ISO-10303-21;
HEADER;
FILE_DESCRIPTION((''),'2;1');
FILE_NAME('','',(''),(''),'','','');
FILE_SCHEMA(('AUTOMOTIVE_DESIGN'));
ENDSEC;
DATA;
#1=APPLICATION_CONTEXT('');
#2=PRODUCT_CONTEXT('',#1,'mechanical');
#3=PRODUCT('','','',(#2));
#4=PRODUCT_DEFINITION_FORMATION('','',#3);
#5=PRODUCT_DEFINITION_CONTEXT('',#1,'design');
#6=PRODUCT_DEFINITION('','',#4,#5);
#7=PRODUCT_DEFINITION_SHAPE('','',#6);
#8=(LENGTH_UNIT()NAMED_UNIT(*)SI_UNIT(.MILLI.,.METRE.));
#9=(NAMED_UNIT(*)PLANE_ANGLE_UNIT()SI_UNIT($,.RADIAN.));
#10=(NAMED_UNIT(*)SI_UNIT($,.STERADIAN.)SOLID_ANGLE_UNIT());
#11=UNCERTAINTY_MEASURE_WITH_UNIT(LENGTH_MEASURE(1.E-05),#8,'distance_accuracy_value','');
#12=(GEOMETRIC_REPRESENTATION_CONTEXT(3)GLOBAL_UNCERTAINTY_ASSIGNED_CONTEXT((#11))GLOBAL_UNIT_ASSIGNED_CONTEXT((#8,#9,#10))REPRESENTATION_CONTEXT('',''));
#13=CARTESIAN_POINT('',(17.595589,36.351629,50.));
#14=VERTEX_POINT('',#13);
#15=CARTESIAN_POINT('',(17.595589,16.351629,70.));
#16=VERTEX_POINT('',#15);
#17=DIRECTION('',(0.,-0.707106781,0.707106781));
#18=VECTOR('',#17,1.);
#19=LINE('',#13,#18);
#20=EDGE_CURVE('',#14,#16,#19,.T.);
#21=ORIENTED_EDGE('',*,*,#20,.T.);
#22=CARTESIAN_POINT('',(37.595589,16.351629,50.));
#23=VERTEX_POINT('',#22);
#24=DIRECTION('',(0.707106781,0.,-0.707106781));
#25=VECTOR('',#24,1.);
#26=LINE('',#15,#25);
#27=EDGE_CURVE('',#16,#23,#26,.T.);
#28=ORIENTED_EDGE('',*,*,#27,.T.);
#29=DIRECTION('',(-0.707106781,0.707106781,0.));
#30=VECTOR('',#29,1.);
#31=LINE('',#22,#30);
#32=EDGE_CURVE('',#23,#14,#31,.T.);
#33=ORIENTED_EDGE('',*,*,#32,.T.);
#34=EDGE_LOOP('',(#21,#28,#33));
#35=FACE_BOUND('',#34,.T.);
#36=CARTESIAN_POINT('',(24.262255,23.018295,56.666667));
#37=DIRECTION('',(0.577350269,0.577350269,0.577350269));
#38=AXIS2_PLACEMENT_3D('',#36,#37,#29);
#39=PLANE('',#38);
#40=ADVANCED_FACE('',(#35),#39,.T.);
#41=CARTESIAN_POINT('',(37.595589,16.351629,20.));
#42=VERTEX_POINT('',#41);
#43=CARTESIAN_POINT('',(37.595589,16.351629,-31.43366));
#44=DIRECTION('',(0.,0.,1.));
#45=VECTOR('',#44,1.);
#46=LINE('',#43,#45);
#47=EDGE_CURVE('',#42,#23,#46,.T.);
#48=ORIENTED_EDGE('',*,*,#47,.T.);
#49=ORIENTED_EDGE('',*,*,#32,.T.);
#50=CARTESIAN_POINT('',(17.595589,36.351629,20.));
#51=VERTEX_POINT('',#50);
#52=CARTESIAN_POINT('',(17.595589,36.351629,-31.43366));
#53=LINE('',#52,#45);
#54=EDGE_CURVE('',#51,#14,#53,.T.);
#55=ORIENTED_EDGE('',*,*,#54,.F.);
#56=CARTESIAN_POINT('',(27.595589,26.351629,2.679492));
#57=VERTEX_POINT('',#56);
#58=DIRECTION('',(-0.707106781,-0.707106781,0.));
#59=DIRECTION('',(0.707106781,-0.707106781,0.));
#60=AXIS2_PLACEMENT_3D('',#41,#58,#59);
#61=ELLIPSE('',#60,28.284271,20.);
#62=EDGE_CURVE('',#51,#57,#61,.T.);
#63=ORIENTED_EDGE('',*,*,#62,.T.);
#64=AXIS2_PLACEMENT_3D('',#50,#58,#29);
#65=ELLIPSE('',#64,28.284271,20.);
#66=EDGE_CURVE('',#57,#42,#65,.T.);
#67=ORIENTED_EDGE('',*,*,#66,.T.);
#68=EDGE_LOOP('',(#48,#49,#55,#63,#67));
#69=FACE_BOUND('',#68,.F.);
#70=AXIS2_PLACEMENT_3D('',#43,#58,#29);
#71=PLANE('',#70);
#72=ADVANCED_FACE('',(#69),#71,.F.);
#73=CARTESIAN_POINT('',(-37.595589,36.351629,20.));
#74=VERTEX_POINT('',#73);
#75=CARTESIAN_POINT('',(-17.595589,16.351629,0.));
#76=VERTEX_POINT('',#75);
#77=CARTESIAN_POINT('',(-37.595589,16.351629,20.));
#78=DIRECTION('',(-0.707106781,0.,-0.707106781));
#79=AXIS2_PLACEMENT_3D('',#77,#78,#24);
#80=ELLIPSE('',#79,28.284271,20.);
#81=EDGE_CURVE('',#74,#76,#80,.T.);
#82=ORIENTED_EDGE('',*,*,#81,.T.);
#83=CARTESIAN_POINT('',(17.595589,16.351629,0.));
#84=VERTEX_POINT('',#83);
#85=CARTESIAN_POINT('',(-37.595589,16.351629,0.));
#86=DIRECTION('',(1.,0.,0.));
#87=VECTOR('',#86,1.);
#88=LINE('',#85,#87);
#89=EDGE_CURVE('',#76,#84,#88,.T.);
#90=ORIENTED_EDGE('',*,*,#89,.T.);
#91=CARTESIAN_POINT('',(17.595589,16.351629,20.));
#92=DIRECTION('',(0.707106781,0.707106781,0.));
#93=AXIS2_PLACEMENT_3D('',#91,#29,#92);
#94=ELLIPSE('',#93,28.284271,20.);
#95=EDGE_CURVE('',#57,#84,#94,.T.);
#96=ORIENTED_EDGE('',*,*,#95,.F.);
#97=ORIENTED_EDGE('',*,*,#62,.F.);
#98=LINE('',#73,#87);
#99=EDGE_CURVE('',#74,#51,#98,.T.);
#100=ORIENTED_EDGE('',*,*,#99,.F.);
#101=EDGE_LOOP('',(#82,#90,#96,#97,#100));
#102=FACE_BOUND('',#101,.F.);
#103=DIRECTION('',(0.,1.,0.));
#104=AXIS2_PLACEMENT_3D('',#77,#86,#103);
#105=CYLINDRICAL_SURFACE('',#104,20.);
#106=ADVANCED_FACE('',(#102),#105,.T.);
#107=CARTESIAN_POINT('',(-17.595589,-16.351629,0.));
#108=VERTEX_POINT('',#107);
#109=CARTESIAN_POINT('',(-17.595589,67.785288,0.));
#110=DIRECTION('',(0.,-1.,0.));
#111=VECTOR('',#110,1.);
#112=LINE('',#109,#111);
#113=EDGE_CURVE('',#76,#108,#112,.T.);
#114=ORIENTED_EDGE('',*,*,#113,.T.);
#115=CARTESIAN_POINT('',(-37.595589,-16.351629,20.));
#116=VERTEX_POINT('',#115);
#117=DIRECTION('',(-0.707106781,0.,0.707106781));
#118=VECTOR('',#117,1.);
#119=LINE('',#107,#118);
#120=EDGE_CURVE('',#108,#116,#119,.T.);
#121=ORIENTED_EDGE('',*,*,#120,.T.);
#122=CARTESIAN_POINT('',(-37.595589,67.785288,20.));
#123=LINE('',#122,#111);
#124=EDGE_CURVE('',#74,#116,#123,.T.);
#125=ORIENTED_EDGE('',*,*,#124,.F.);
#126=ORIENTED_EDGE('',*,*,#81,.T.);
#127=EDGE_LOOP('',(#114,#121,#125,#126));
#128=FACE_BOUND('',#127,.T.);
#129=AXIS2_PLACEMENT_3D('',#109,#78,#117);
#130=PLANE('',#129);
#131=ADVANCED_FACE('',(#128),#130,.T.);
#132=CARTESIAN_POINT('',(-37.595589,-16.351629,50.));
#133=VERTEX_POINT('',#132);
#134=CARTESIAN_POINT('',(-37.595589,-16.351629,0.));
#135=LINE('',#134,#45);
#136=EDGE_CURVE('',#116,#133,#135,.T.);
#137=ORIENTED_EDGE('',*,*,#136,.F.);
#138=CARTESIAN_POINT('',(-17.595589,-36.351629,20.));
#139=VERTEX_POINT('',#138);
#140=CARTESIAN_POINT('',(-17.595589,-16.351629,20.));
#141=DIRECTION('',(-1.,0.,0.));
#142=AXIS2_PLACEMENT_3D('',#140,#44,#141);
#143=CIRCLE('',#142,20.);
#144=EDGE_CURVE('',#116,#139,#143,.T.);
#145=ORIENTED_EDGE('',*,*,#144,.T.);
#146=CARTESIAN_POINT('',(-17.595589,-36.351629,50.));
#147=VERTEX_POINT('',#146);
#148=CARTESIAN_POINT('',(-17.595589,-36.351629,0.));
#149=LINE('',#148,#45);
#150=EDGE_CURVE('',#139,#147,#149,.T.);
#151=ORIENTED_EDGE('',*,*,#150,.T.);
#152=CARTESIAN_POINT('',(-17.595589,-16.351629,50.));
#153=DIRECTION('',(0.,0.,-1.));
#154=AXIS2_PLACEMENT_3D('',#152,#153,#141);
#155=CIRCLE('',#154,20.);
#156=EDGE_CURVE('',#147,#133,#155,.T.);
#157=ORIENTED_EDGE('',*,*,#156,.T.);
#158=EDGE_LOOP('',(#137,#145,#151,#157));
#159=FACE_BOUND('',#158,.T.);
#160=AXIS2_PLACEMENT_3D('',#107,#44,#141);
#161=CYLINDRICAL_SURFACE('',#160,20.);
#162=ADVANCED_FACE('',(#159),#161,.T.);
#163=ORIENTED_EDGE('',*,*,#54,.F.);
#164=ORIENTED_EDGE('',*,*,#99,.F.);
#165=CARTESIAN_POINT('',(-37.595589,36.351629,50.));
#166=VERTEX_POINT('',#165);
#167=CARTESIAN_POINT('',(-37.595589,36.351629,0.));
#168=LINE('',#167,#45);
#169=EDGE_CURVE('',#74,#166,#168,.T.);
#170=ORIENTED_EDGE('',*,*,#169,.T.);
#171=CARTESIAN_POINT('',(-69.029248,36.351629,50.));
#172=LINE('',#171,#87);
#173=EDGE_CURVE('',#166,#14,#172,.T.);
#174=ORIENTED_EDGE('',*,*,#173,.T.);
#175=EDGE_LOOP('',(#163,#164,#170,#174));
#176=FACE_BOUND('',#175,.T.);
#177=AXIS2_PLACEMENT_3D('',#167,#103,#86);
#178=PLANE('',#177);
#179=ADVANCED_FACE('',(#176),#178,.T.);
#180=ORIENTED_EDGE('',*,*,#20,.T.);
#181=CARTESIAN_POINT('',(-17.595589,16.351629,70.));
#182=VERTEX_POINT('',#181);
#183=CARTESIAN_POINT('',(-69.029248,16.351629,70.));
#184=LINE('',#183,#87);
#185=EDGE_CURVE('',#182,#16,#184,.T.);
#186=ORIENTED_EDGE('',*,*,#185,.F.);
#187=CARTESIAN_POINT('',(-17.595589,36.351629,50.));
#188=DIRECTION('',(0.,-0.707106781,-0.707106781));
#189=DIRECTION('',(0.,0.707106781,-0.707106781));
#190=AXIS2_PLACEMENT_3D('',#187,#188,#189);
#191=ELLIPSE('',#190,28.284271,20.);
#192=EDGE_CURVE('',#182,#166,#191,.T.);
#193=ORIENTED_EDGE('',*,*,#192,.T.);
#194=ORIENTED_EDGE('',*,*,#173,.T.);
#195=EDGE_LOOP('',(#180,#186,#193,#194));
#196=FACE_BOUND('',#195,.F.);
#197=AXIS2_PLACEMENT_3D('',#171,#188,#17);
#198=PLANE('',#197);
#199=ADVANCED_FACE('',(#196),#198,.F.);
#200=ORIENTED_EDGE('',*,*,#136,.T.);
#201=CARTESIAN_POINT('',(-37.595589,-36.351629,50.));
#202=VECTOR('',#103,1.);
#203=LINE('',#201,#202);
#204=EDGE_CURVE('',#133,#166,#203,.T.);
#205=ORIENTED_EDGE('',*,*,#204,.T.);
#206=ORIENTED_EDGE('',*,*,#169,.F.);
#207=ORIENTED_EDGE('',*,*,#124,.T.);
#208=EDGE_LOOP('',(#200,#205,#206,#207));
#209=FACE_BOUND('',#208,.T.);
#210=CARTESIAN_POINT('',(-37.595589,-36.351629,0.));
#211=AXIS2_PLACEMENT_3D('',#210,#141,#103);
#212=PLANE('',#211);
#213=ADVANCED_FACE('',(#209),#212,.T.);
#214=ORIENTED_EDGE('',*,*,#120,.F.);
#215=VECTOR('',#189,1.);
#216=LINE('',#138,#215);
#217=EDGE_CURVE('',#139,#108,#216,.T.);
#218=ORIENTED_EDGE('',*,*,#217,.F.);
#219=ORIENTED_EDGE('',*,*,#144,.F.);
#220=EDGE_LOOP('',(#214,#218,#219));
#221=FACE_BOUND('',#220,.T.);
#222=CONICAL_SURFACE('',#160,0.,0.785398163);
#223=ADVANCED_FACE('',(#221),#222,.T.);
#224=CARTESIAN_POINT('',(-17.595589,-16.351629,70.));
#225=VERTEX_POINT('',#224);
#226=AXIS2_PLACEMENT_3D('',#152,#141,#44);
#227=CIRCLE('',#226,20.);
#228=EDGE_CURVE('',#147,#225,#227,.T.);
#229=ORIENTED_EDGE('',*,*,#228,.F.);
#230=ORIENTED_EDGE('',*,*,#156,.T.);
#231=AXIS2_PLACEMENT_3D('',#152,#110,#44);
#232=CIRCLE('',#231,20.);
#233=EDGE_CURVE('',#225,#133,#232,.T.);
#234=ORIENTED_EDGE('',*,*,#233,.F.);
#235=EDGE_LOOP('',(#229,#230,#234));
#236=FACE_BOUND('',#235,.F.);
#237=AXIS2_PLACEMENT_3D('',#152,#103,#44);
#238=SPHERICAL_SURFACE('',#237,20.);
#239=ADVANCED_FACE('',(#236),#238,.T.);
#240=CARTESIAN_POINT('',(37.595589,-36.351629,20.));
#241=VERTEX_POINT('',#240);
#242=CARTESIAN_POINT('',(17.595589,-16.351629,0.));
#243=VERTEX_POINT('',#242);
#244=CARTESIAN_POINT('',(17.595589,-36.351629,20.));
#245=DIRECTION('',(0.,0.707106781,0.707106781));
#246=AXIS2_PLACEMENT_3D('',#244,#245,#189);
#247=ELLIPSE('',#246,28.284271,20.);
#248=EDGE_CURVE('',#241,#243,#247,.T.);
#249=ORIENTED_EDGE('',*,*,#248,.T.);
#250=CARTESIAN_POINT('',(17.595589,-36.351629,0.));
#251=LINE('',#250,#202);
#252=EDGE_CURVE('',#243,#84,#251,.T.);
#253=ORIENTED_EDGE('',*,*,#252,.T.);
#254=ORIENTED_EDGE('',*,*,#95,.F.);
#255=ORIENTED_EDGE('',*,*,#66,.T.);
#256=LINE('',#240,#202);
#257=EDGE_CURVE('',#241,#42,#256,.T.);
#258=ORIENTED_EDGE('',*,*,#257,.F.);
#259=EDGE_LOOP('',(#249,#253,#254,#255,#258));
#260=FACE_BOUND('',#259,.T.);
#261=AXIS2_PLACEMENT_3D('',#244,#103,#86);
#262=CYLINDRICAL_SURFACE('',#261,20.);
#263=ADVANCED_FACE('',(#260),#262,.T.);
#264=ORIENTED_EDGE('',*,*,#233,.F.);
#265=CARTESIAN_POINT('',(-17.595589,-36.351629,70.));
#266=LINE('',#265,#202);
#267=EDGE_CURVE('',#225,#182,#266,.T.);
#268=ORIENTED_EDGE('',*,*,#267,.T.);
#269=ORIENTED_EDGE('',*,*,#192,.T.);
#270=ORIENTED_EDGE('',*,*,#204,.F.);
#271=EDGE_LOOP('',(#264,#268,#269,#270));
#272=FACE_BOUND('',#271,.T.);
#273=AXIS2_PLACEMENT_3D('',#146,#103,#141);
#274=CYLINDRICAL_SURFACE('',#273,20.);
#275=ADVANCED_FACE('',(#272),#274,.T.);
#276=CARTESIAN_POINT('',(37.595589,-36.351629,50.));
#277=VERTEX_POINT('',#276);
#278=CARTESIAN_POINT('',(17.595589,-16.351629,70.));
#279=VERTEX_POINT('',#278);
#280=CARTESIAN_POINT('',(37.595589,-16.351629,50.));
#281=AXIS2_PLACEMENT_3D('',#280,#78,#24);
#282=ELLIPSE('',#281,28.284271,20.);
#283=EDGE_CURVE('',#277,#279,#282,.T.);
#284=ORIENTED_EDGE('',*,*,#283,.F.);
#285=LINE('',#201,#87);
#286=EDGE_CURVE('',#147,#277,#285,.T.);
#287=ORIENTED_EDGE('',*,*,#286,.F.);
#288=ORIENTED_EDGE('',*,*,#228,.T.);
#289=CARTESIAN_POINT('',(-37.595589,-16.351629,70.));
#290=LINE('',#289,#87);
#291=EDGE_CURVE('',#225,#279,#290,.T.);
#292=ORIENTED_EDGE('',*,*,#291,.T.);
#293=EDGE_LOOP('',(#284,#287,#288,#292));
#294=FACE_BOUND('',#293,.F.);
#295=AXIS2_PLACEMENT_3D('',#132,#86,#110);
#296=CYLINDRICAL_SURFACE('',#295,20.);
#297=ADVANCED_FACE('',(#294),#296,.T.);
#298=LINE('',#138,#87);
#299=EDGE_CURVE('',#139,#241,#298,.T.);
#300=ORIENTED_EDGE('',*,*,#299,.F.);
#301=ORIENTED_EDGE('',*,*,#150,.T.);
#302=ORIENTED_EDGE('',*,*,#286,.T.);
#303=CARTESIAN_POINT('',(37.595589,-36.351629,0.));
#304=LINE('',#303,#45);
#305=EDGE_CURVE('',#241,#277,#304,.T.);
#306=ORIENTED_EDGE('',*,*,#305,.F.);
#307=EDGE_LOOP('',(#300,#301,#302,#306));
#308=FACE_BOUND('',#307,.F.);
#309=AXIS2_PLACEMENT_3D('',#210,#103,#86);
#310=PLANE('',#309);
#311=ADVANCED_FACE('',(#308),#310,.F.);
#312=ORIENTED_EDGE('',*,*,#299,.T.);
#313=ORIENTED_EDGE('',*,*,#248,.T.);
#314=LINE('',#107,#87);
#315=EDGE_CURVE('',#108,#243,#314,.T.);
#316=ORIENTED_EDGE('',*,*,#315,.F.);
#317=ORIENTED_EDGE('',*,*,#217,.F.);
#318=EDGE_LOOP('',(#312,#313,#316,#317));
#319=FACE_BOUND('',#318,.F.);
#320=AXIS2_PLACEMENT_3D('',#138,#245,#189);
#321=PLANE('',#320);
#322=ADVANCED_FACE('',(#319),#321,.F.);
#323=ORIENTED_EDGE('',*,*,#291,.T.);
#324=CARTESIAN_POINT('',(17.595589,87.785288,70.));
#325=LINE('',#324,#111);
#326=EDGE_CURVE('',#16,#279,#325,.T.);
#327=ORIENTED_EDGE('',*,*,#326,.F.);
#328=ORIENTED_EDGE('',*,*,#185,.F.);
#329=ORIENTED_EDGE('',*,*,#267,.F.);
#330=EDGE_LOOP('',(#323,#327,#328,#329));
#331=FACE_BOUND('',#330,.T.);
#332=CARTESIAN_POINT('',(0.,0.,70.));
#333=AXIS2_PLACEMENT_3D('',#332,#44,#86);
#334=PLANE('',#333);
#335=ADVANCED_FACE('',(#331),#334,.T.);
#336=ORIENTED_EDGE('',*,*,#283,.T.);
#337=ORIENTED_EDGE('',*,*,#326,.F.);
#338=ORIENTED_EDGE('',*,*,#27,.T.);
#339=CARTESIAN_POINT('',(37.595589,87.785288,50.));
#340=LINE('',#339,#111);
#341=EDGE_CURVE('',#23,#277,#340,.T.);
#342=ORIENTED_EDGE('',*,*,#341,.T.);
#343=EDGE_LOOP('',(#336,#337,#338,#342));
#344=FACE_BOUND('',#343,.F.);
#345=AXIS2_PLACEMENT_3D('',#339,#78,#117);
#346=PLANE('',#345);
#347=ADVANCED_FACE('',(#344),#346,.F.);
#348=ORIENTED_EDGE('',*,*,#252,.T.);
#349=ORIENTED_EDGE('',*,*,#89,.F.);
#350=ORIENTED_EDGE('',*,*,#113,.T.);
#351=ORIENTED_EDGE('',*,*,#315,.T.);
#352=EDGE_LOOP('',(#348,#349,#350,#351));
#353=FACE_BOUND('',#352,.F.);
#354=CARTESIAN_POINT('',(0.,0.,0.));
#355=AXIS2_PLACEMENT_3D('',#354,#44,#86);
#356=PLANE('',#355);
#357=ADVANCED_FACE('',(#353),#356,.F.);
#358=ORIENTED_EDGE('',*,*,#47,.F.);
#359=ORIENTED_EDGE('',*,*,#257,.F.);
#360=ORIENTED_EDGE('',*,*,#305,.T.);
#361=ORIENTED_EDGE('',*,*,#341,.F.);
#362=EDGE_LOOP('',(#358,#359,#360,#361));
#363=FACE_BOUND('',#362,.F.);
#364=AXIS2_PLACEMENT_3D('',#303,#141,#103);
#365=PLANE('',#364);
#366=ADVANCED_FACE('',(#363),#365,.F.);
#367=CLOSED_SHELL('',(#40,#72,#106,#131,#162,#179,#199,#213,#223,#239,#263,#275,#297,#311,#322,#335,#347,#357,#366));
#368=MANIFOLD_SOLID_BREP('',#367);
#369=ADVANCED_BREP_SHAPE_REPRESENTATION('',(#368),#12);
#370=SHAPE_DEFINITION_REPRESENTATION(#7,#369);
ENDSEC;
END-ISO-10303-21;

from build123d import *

# Parameters (mm, degrees)
F0_W         = 75.1911774278
F0_H         = 72.7032572031
F1_DEPTH     = 70
F2_R         = 20
F3_T1_DEPTH  = 25.4034118443
F3_T3_DEPTH  = 155.5705767217
F3_T5_DEPTH  = 158.0584969464
F3_T7_DEPTH  = 152.8673195186
F3_T9_DEPTH  = 86.6248371871
F3_T11_DEPTH = 84.1369169624
F3_T14_ANGLE = 90


# Not quite as in the source:
# - a fillet or chamfer that OpenCascade refuses, or shapes differently, is made with other operations: its cross-section is extruded or revolved along the edge and cut away or added


with BuildPart() as f1:
    # F0 (on Top) → F1 (new body)
    with BuildSketch(Plane.XY):
        Rectangle(F0_W, F0_H)
    extrude(amount=F1_DEPTH)

    # F2
    f2_edges = [f1.edges().sort_by_distance(p)[0] for p in [
        (-37.595589, 0, 70),
        (0, -36.351629, 70),
        (-37.595589, -36.351629, 35),
        (0, 36.351629, 0),
        (37.595589, 0, 0),
    ]]
    fillet(f2_edges, radius=F2_R)

    # F3: chamfer of 20 on 6 edges, made by hand

    # F3_s2 → F3_t1 (cut)
    with BuildSketch(Plane(origin=(34.6490724385, 34.6490724385, 34.6490724385), x_dir=(-0.7071067812, 0.7071067812, 0), z_dir=(0.5773502692, 0.5773502692, 0.5773502692))):
        Polygon((-15.0217482547, 18.8009698021), (13.2625229928, 18.8009698021), (-0.879612631, 43.2958672299), align=None)
    extrude(amount=F3_T1_DEPTH, mode=Mode.SUBTRACT)

    # F3_s4 → F3_t3 (cut)
    with BuildSketch(Plane.XZ.offset(-87.7852883609)):
        Polygon((37.5955887139, 50), (17.5955887139, 70), (37.5955887139, 70), align=None)
    extrude(amount=F3_T3_DEPTH, mode=Mode.SUBTRACT)

    # F3_s6 → F3_t5 (cut)
    with BuildSketch(Plane.YZ.offset(-69.0292484732)):
        Polygon((36.3516286016, 50), (16.3516286016, 70), (36.3516286016, 70), align=None)
    extrude(amount=F3_T5_DEPTH, mode=Mode.SUBTRACT)

    # F3_s8 → F3_t7 (cut)
    with BuildSketch(Plane.XY.offset(-31.4336597593)):
        Polygon((37.5955887139, 16.3516286016), (17.5955887139, 36.3516286016), (37.5955887139, 36.3516286016), align=None)
    extrude(amount=F3_T7_DEPTH, mode=Mode.SUBTRACT)

    # F3_s10 → F3_t9 (cut)
    with BuildSketch(Plane.YZ.offset(-17.5955887139)):
        Polygon((-36.3516286016, 20), (-16.3516286016, 0), (-36.3516286016, 0), align=None)
    extrude(amount=F3_T9_DEPTH, mode=Mode.SUBTRACT)

    # F3_s12 → F3_t11 (cut)
    with BuildSketch(Plane.XZ.offset(-67.7852883609)):
        Polygon((-17.5955887139, 0), (-37.5955887139, 20), (-37.5955887139, 0), align=None)
    extrude(amount=F3_T11_DEPTH, mode=Mode.SUBTRACT)

    # F3_s13 → F3_t14 (revolve, cut)
    with BuildSketch(Plane.XZ.offset(16.3516286016)):
        Polygon((-17.5955887139, 0), (-37.5955887139, 20), (-37.5955887139, 0), align=None)
    revolve(axis=Axis((-17.5955887139, -16.3516286016, 0), (0, 0, 1)), revolution_arc=F3_T14_ANGLE, mode=Mode.SUBTRACT)


solid = f1.part
